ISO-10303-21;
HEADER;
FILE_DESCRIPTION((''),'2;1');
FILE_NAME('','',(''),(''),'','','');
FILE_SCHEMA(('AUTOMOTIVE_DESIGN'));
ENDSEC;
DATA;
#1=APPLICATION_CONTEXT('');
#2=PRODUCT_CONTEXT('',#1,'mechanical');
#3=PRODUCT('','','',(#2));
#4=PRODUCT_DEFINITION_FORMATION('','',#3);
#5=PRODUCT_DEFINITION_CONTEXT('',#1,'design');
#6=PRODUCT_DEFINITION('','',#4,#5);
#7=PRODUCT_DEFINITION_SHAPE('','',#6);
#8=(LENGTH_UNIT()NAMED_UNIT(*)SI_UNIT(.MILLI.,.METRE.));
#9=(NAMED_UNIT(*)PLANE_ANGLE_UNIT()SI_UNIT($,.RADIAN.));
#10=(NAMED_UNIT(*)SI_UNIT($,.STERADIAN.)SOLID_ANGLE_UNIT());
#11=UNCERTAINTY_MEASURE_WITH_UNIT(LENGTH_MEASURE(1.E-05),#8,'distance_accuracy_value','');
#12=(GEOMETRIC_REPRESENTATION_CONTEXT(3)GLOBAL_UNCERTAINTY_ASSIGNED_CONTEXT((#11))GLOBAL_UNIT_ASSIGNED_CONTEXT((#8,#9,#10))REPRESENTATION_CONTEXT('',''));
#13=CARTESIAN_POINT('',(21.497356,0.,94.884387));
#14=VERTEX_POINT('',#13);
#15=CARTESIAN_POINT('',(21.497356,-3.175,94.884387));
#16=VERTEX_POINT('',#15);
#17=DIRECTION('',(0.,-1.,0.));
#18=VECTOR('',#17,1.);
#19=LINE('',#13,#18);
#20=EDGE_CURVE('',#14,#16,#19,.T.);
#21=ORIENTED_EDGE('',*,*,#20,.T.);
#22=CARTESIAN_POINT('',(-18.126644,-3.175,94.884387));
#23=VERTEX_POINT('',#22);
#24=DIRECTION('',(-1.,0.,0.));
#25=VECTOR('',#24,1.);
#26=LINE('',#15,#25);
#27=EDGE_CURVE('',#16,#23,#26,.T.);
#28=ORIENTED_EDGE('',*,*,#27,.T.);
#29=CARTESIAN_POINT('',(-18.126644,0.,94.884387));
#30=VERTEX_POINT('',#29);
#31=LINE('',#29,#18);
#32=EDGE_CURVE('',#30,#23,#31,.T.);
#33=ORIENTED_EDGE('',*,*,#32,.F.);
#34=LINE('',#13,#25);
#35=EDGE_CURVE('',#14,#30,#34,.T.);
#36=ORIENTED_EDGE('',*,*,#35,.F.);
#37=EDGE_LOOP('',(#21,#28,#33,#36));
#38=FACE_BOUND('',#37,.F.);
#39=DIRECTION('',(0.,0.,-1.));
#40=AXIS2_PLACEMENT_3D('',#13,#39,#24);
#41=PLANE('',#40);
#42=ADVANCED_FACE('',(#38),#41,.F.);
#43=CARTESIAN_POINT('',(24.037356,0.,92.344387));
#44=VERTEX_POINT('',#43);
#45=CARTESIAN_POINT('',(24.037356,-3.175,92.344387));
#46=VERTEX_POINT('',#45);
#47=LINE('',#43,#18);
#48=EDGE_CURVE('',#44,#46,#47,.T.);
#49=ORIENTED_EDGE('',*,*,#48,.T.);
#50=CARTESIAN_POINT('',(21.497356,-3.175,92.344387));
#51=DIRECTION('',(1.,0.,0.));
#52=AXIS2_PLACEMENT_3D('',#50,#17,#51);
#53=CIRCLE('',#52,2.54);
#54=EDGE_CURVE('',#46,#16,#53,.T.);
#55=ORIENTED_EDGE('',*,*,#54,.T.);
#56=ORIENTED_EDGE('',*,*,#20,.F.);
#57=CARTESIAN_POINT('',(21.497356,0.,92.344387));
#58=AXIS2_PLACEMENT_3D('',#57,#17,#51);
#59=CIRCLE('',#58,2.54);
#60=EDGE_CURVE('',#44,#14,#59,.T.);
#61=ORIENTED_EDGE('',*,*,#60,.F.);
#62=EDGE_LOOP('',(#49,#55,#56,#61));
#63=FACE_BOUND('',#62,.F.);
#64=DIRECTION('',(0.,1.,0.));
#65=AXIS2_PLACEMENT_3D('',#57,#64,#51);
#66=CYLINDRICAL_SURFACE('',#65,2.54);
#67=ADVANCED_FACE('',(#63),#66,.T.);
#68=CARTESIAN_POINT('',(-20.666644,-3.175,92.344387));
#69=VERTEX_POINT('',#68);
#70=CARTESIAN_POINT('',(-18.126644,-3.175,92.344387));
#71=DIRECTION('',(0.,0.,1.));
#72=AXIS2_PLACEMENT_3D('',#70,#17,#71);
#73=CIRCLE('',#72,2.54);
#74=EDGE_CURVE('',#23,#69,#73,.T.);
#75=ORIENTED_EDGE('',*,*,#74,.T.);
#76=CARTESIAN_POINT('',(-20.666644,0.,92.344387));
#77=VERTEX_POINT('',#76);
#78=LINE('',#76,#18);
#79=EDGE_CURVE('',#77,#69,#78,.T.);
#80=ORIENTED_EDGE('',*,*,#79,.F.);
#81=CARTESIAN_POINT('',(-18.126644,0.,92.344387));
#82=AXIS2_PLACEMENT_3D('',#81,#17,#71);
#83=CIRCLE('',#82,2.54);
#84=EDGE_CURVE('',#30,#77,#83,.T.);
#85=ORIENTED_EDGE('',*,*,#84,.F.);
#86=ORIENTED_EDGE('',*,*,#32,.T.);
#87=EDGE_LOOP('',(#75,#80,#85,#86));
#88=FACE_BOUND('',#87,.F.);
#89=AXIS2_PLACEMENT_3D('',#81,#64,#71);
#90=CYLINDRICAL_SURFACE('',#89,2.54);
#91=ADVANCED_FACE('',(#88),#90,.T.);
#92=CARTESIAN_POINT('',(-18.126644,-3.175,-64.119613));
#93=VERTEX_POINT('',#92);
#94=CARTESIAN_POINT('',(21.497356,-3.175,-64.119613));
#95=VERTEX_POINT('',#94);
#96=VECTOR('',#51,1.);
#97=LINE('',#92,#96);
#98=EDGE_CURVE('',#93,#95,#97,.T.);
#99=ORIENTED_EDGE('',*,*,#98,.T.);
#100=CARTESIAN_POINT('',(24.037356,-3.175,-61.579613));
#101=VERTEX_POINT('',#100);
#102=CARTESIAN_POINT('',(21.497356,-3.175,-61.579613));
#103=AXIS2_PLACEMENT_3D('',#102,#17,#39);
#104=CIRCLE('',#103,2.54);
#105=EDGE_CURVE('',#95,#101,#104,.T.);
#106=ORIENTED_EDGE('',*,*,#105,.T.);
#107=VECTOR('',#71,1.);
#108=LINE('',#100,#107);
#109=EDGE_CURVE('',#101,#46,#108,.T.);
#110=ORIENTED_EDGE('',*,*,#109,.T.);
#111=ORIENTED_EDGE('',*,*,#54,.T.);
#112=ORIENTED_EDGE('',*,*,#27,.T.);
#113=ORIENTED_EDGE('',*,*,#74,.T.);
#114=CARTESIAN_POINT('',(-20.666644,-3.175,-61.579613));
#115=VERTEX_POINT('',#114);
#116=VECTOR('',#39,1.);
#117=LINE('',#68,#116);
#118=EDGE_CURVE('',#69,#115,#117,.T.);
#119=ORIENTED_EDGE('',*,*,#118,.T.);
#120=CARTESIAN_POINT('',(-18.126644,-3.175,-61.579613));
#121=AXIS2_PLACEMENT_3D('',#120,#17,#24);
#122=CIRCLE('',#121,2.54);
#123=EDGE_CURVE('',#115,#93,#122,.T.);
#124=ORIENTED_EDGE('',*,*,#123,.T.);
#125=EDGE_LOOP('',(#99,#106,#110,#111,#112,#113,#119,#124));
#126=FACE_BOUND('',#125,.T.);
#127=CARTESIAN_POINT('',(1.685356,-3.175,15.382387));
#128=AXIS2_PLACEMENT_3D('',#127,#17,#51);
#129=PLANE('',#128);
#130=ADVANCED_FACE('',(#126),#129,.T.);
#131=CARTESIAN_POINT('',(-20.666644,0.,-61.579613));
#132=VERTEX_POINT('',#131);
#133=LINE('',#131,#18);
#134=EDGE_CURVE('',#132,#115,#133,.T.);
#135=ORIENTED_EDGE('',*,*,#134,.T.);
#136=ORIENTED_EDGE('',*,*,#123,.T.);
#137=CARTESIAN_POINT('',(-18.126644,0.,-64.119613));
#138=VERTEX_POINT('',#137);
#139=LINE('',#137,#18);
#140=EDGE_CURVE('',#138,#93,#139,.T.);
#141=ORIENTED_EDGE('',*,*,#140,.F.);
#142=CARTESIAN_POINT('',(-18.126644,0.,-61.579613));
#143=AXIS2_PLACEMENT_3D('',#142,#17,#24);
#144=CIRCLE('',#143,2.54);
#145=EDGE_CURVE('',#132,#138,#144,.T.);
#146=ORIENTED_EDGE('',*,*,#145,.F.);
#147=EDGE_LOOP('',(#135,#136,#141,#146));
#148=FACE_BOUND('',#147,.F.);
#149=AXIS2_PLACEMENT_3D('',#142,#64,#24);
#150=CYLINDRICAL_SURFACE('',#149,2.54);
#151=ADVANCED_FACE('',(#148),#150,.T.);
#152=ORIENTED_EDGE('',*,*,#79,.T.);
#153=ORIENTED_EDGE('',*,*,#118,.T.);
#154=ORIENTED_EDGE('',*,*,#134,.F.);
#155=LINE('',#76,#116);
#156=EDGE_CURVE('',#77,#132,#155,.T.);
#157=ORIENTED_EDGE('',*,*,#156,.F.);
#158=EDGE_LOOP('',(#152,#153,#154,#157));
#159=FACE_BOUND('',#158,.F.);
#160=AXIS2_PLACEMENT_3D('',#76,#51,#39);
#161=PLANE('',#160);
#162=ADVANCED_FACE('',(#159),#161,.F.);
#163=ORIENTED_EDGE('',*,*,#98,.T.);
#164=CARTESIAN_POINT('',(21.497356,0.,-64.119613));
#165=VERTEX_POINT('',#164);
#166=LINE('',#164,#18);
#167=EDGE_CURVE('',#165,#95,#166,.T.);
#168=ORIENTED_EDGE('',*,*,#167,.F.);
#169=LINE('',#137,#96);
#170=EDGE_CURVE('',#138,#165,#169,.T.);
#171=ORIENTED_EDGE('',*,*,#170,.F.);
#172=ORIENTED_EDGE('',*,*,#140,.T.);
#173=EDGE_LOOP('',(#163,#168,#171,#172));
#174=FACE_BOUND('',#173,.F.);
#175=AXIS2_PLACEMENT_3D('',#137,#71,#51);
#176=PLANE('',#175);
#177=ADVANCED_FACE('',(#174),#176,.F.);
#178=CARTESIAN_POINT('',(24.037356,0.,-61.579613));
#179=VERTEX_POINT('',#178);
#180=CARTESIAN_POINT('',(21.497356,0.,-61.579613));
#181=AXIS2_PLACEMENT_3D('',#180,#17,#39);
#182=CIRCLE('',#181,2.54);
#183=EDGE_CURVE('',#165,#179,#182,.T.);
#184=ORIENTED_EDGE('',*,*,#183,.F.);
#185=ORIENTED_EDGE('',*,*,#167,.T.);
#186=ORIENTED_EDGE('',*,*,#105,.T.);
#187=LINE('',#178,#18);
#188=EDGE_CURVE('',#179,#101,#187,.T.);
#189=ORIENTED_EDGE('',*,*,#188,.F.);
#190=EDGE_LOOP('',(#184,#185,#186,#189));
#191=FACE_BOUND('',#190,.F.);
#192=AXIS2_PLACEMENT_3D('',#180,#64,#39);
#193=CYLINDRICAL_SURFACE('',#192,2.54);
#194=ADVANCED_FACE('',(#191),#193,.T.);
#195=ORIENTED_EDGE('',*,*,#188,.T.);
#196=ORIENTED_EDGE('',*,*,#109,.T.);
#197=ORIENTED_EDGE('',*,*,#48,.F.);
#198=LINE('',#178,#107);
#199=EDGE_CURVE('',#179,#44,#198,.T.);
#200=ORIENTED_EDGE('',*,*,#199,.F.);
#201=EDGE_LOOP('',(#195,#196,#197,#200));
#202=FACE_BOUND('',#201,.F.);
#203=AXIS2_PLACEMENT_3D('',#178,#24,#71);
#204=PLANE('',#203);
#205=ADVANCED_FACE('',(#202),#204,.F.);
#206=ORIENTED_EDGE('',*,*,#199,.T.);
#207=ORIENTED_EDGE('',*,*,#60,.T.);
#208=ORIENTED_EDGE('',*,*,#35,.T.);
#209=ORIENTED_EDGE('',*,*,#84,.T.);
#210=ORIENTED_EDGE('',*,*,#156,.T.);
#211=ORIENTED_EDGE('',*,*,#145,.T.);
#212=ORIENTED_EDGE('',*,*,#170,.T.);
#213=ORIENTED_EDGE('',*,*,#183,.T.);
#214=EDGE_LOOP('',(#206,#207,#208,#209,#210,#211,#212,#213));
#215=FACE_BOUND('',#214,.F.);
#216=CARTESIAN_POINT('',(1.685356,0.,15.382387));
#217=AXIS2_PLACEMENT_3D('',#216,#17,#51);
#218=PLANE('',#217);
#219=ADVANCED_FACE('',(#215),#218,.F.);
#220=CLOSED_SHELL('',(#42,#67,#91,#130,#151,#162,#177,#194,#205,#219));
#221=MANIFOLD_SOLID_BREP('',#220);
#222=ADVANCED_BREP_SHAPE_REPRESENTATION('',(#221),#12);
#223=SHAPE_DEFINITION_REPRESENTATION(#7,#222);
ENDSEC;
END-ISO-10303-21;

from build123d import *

# Parameters (mm, degrees)
F1_DEPTH = 3.175


# Not quite as in the source:
# - a length typed as a fraction of an inch, garbled in the dataset ("3 / 203.2 mm" for 3/8 in), is restored


with BuildPart() as f1:
    # F0 (on Front) → F1 (new body)
    with BuildSketch(Plane.XZ):
        with BuildLine():
            Line((21.49735579, 94.8843865406), (-18.12664421, 94.8843865406))
            ThreePointArc((-18.12664421, 94.8843865406), (-19.9226954343, 94.1404377648), (-20.66664421, 92.3443865406))
            Line((-20.66664421, 92.3443865406), (-20.66664421, -61.5796134594))
            ThreePointArc((-20.66664421, -61.5796134594), (-19.9226954343, -63.3756646836), (-18.12664421, -64.1196134594))
            Line((-18.12664421, -64.1196134594), (21.49735579, -64.1196134594))
            ThreePointArc((21.49735579, -64.1196134594), (23.2934070142, -63.3756646836), (24.03735579, -61.5796134594))
            Line((24.03735579, -61.5796134594), (24.03735579, 92.3443865406))
            ThreePointArc((24.03735579, 92.3443865406), (23.2934070142, 94.1404377648), (21.49735579, 94.8843865406))
        make_face()
    extrude(amount=F1_DEPTH)


solid = f1.part
